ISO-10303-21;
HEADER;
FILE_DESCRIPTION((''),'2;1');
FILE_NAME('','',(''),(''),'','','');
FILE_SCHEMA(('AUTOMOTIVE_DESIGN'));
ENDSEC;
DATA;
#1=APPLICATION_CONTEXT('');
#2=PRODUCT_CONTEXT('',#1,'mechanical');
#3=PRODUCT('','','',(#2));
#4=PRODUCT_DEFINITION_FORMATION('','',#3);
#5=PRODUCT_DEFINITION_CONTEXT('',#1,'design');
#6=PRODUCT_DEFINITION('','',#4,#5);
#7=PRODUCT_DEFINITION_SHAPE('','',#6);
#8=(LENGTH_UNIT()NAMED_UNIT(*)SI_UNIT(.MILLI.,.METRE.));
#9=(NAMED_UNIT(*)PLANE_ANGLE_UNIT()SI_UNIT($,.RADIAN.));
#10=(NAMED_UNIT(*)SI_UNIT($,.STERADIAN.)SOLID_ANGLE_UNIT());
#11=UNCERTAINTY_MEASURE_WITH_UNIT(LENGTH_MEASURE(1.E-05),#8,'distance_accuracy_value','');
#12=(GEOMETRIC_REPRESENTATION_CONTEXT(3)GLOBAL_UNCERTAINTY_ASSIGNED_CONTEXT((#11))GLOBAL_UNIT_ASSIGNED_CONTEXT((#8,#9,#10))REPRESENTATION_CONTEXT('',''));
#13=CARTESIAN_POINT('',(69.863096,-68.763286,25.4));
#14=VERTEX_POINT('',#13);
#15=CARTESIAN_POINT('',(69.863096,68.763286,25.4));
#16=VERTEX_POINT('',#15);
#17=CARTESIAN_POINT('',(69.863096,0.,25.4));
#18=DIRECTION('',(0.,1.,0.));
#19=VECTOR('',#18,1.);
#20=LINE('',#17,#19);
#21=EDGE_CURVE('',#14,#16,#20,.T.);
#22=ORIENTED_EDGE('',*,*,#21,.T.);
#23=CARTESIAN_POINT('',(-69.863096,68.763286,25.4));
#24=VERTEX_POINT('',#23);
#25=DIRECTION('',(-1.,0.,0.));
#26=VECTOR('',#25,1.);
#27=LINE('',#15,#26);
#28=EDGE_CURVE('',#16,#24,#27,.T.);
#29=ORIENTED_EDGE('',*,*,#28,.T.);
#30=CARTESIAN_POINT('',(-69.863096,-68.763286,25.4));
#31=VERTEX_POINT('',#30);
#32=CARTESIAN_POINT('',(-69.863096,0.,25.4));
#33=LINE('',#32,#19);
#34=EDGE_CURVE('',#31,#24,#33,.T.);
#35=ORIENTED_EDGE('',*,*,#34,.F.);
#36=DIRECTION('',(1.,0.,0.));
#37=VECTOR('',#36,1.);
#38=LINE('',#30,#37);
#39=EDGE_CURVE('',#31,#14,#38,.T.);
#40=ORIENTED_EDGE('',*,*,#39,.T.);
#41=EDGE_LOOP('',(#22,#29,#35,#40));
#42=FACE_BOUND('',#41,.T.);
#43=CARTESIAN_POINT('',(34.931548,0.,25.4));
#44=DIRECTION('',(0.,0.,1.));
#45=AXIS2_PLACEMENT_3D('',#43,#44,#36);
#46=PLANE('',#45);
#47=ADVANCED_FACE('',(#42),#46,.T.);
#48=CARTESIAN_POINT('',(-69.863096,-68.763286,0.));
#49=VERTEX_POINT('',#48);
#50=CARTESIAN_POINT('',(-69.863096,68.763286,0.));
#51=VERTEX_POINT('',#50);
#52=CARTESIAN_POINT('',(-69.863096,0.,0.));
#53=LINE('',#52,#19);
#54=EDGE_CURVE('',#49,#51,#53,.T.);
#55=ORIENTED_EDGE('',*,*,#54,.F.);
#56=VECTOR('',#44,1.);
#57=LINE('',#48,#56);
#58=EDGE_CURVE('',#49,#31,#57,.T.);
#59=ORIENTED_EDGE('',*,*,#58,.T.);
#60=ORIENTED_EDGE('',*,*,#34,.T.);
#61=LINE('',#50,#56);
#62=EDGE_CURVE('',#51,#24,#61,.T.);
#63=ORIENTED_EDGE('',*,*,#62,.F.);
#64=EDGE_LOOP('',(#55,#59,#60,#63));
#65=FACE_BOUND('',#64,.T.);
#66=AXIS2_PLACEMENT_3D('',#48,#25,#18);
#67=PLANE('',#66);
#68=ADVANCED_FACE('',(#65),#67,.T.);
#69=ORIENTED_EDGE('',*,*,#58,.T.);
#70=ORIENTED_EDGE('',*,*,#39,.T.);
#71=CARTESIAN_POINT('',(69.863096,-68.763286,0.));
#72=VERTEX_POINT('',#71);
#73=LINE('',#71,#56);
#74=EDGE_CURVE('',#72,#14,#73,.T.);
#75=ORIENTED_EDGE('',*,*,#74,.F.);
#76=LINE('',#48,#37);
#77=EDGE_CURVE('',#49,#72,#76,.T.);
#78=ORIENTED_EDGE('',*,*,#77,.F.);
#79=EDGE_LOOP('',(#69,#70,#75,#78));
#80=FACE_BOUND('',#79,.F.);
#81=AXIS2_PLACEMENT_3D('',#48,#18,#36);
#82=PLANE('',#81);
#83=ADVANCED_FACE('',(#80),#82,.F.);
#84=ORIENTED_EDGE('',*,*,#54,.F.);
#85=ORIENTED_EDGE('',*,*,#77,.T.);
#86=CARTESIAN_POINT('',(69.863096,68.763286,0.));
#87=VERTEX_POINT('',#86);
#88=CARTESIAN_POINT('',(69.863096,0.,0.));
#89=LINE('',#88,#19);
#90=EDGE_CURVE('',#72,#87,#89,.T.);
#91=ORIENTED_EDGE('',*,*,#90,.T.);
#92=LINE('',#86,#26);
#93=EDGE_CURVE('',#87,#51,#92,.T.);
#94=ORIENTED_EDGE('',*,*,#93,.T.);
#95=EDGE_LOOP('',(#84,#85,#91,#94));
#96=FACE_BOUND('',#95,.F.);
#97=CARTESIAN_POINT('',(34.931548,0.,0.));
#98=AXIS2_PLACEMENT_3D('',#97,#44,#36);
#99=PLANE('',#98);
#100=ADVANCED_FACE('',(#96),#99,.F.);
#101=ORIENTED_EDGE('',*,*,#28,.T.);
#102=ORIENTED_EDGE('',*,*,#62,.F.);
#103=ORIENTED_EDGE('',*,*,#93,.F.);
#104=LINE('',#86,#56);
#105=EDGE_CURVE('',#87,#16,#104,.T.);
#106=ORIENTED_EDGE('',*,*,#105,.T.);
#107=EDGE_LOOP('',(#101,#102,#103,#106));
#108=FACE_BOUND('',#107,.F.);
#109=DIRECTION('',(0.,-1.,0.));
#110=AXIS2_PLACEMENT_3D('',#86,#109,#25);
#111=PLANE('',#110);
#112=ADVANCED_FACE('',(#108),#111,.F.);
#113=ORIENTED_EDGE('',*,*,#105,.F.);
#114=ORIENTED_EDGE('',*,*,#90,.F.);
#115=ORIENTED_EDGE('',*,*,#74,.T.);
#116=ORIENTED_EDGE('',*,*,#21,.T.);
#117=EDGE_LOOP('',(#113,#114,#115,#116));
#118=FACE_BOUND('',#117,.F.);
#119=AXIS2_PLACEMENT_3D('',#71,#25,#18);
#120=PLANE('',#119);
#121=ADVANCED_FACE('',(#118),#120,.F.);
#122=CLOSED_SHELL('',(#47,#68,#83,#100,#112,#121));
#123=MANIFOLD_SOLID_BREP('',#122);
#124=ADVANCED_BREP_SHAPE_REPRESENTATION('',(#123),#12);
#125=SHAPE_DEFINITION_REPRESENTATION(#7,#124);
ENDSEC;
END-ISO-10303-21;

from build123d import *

# Parameters (mm, degrees)
F0_W     = 69.8630958796
F0_H     = 137.5265717506
F3_DEPTH = 25.4


# Not quite as in the source:
# - the program builds the solid bodies; features that only make, move or delete a surface that nothing else refers to are left out


with BuildPart() as f3:
    # F0 (on Top) → F3 (new body)
    with BuildSketch(Plane.XY):
        with Locations((34.9315479398, 0)):
            Rectangle(F0_W, F0_H)
        with Locations((-34.9315479398, 0)):
            Rectangle(F0_W, F0_H)
    extrude(amount=F3_DEPTH)


solid = f3.part
